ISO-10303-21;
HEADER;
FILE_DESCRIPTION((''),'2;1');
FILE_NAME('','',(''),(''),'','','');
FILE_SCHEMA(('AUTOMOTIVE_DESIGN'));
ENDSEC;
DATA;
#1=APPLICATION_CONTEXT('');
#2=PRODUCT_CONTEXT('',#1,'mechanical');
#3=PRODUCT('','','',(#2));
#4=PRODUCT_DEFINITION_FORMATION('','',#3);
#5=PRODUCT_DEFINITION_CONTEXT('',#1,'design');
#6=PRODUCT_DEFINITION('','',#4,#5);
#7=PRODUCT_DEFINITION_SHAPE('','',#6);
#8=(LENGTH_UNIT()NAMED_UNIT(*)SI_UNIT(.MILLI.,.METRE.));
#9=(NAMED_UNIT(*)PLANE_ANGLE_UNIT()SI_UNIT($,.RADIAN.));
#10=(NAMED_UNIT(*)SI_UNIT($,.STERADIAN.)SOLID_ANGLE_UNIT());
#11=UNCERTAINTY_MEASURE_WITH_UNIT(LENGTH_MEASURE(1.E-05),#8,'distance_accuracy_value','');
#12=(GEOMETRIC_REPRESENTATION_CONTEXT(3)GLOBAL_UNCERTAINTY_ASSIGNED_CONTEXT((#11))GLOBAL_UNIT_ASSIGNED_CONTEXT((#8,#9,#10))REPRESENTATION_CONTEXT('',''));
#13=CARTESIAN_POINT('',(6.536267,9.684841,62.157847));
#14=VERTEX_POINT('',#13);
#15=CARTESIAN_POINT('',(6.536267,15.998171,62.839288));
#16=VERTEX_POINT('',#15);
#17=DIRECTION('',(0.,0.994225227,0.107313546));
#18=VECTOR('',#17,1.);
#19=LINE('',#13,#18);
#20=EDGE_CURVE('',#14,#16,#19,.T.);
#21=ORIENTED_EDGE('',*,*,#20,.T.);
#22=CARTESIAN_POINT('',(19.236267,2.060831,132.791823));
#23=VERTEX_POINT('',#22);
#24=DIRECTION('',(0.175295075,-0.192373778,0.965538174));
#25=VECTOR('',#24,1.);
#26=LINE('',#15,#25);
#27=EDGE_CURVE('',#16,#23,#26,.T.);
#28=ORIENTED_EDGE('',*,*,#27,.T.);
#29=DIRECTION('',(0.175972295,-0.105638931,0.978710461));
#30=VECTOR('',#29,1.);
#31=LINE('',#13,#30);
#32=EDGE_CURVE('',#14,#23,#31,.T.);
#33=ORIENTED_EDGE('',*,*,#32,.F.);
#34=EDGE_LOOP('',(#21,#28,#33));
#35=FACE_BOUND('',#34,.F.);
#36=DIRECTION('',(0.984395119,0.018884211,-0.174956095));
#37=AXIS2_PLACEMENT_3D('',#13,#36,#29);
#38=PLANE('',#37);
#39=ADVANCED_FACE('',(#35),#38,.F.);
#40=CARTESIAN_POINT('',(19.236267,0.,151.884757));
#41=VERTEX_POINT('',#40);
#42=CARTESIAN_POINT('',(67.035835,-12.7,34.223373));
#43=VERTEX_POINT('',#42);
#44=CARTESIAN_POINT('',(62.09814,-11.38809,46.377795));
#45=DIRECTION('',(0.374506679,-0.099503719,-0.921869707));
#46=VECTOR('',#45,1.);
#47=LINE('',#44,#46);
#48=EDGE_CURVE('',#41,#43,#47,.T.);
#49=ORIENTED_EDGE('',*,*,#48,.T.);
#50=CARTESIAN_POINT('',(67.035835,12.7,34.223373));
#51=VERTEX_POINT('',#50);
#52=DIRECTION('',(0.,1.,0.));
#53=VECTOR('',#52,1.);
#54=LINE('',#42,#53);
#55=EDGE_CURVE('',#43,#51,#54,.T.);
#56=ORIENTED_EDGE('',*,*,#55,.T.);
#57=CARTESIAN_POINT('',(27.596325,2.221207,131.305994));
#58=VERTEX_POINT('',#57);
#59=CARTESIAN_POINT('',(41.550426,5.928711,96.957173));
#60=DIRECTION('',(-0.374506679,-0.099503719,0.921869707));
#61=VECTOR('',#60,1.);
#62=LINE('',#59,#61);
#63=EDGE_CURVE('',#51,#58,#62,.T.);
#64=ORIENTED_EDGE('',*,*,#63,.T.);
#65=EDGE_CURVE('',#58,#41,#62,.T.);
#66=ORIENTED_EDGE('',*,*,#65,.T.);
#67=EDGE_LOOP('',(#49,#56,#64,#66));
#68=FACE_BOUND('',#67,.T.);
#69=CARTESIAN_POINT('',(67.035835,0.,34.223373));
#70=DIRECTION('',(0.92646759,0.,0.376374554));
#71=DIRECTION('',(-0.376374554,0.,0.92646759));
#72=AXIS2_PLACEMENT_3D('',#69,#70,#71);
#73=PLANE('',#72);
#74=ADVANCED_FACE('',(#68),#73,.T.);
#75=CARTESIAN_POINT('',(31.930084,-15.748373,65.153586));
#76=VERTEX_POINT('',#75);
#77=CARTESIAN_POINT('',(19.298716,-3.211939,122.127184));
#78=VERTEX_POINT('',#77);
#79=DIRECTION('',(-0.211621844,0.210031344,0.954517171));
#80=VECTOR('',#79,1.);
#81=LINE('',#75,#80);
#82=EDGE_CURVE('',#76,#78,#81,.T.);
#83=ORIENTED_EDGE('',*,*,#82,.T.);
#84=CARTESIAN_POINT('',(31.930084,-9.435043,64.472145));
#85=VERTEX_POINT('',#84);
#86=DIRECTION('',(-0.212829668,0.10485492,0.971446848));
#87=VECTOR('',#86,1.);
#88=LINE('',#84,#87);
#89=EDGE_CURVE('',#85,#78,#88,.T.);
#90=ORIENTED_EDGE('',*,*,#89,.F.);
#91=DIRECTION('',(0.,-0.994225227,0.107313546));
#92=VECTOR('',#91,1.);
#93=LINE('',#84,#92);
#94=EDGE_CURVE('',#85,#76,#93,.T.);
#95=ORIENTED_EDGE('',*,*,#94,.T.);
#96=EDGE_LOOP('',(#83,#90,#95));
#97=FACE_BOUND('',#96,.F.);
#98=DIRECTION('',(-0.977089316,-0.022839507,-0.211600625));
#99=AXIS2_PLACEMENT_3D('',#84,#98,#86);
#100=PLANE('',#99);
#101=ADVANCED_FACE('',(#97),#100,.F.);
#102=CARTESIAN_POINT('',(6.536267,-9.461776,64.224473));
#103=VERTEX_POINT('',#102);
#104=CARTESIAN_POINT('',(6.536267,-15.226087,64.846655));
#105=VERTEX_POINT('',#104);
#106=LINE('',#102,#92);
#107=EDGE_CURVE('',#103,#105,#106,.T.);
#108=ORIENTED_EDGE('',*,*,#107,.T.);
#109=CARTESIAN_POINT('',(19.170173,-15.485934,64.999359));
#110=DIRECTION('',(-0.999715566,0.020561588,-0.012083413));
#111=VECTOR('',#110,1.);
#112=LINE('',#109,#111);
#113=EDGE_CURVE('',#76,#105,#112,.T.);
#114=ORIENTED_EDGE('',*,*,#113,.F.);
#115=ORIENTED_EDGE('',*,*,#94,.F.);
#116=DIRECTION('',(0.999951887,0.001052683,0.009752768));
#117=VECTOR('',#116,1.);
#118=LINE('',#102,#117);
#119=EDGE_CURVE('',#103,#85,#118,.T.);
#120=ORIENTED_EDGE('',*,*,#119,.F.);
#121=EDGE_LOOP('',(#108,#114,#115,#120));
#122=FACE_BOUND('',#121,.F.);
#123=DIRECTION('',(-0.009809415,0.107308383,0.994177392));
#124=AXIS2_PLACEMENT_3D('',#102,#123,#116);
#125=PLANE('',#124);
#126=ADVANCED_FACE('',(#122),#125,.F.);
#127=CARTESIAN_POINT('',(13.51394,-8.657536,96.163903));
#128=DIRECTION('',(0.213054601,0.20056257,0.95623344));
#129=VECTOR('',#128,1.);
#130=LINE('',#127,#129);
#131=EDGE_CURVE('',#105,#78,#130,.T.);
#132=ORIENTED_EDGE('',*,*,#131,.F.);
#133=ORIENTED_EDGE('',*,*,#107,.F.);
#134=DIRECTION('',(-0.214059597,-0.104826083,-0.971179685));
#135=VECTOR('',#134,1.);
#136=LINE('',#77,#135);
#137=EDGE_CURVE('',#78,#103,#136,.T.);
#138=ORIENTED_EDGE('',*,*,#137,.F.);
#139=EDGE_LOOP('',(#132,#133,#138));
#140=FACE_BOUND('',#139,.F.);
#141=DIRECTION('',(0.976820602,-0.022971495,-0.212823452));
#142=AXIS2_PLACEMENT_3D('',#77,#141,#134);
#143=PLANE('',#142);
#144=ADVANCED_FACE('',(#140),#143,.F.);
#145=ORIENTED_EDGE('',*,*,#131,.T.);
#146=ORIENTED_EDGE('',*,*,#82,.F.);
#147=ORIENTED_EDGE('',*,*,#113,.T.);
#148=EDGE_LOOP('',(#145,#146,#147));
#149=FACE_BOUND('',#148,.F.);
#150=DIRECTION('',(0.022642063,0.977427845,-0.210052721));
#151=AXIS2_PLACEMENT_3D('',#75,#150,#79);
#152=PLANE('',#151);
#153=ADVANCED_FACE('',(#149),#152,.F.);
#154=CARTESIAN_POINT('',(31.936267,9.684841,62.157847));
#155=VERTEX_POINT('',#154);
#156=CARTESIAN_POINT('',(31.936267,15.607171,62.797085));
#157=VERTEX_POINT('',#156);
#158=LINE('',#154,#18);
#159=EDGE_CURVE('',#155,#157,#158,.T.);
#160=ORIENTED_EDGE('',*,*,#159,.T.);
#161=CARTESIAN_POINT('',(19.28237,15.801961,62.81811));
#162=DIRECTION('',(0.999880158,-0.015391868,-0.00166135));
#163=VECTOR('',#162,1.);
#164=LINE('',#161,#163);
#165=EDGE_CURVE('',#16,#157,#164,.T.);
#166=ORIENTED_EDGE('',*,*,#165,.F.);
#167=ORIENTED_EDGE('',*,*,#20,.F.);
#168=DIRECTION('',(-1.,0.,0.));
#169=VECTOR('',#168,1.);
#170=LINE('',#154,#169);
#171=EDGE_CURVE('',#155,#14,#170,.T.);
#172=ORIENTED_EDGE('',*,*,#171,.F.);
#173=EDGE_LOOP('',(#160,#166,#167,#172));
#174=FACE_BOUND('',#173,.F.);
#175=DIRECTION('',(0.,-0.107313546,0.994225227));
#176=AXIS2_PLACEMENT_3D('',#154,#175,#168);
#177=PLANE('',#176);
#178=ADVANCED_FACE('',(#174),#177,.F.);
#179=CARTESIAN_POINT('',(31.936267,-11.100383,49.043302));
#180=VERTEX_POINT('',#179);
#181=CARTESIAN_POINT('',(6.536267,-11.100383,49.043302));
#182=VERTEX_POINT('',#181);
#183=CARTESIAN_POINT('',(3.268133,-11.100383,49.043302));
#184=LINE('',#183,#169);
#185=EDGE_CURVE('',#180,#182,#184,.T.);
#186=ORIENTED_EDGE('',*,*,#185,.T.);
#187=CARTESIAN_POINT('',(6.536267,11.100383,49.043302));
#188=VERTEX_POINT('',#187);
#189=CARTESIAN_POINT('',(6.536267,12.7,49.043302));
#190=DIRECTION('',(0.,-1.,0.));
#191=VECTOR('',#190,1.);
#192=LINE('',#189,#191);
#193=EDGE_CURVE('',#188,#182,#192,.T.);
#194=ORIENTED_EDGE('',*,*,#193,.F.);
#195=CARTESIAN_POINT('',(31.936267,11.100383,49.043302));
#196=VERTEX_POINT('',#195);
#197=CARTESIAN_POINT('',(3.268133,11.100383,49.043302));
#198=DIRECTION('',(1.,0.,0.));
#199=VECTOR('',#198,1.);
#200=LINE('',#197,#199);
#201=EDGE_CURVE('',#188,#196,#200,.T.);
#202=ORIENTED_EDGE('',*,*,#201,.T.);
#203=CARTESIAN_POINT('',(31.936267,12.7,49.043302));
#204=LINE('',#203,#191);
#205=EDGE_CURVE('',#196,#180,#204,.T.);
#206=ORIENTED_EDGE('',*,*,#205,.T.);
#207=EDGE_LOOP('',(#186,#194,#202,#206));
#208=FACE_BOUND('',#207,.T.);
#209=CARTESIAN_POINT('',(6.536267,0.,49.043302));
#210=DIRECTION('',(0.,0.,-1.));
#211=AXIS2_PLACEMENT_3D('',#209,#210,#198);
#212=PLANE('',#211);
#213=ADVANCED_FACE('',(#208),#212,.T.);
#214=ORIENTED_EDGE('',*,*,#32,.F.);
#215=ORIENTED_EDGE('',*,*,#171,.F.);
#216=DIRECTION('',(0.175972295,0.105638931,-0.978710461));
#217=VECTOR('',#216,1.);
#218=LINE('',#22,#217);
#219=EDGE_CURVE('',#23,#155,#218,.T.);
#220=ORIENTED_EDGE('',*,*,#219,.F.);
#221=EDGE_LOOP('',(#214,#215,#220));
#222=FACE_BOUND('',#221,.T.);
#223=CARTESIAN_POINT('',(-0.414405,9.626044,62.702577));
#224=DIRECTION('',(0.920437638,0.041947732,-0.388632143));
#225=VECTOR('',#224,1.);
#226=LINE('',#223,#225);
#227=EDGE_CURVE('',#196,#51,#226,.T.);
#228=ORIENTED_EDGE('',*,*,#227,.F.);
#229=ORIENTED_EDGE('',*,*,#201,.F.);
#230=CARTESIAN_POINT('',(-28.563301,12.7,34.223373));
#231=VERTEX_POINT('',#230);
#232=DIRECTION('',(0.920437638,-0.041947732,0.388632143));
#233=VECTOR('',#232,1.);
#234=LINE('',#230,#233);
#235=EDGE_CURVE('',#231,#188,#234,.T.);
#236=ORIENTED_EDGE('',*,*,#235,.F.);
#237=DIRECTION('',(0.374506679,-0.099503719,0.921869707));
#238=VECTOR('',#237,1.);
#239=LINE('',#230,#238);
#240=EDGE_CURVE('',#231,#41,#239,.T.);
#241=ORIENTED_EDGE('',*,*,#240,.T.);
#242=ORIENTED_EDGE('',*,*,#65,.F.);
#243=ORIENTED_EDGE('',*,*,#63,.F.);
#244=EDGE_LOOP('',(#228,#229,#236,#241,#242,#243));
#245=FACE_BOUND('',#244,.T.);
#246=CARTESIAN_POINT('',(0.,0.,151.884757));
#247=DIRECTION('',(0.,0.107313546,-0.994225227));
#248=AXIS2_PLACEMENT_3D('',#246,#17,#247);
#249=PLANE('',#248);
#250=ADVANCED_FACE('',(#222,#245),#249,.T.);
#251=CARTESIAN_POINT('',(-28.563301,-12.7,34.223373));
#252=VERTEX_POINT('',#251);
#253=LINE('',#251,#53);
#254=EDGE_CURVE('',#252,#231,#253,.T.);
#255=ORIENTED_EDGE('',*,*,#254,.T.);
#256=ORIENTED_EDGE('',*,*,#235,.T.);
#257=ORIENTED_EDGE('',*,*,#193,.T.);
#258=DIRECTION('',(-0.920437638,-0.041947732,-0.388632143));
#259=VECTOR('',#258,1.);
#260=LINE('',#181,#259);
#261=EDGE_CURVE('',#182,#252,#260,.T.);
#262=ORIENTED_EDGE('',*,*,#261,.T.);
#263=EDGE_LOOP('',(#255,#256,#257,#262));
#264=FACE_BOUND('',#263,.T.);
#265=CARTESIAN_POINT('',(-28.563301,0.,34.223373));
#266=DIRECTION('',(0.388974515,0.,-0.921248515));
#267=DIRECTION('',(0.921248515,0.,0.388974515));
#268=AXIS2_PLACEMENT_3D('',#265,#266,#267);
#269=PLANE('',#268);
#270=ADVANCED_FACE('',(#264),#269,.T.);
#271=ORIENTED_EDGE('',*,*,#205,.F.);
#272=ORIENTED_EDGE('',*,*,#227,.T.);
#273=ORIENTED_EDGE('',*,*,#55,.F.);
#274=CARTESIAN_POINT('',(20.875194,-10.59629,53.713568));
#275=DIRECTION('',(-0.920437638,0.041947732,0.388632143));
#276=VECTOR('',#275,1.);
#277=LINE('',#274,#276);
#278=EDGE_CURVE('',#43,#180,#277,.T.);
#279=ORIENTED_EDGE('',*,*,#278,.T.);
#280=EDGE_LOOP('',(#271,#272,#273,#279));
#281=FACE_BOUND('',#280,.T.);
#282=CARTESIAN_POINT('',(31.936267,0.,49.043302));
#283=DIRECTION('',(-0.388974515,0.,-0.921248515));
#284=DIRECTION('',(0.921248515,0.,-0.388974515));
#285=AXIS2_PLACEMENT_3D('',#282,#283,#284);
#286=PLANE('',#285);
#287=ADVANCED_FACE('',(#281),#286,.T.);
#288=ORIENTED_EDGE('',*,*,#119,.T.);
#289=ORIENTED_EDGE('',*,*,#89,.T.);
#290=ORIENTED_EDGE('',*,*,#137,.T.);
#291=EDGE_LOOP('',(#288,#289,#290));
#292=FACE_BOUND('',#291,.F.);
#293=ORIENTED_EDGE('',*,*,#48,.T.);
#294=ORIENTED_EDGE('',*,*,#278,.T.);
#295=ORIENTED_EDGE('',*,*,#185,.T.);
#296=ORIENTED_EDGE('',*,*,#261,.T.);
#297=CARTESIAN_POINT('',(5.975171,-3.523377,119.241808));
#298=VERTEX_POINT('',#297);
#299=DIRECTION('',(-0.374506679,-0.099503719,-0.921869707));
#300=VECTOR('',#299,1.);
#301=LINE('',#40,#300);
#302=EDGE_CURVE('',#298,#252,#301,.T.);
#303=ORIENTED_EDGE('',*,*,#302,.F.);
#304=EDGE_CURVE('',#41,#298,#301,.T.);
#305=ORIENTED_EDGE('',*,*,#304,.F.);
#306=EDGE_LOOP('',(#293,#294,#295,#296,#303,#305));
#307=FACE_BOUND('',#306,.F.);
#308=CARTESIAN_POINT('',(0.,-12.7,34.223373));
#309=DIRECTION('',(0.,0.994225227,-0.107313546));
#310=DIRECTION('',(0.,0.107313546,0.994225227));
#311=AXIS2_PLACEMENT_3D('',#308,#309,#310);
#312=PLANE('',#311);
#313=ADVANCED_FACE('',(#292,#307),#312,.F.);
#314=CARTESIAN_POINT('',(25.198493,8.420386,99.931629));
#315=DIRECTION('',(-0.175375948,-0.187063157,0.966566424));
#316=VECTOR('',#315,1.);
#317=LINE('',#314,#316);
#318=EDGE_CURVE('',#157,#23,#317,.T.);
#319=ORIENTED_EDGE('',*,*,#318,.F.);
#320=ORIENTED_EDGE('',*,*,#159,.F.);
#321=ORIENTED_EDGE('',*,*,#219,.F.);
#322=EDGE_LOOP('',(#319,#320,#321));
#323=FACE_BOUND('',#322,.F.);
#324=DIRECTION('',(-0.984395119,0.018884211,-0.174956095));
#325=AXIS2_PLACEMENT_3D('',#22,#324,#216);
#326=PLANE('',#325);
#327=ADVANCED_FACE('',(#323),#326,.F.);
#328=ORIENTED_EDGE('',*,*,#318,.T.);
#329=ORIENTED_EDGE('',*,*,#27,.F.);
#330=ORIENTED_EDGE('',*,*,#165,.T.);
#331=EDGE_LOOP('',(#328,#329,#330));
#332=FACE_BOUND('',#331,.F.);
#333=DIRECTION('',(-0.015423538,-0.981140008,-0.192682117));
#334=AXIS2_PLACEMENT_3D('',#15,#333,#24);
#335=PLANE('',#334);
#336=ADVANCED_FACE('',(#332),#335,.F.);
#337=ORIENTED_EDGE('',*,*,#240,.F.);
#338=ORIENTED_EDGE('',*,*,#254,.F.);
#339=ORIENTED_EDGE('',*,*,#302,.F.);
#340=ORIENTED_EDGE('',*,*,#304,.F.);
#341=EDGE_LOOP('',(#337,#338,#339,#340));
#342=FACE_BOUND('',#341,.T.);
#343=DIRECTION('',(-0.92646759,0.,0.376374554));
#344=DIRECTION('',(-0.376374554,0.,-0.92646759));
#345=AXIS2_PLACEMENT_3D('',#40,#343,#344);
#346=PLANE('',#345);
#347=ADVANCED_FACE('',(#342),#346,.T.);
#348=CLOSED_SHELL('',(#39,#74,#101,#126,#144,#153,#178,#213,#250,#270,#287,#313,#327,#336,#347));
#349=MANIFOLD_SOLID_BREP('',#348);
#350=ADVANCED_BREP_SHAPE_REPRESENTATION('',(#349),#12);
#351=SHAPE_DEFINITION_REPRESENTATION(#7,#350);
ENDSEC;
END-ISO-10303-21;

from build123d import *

# Parameters (mm, degrees)
F3_DEPTH  = 12.7
F5_DEPTH  = 67.0368353671
F6_DEPTH  = 28.5643014728
F8_DEPTH  = 6.35
F10_DEPTH = 64.56300866
F12_DEPTH = 6.35
F14_DEPTH = 65.6539037047


# Not quite as in the source:
# - the program builds the solid bodies; features that only make, move or delete a surface that nothing else refers to are left out


with BuildPart() as f3:
    # F2 (on Front) → F3 (new body, symmetric)
    with BuildSketch(Plane.XZ):
        Polygon((-28.5633014728, 34.2233732831), (6.5362669471, 49.0433023226), (31.9362669471, 49.0433023226), (67.0358353671, 34.2233732831), (19.2362669471, 151.884757173), align=None)
    extrude(amount=F3_DEPTH, both=True)

    # F4 (on Right) → F5 (cut, through all)
    with BuildSketch(Plane.YZ):
        Polygon((-12.7, 151.884757173), (-12.7, 49.0433023226), (-11.1003834344, 49.0433023226), (0, 151.884757173), align=None)
        Polygon((11.1003834344, 49.0433023226), (12.7, 49.0433023226), (12.7, 151.884757173), (0, 151.884757173), align=None)
        Polygon((-12.7, 49.0433023226), (-12.7, 34.2233732831), (-11.1003834344, 49.0433023226), align=None)
        Polygon((11.1003834344, 49.0433023226), (12.7, 34.2233732831), (12.7, 49.0433023226), align=None)
    extrude(amount=F5_DEPTH, mode=Mode.SUBTRACT)

    # F4 (on Right) → F6 (cut, through all)
    with BuildSketch(Plane.YZ):
        Polygon((-12.7, 151.884757173), (-12.7, 49.0433023226), (-11.1003834344, 49.0433023226), (0, 151.884757173), align=None)
        Polygon((11.1003834344, 49.0433023226), (12.7, 49.0433023226), (12.7, 151.884757173), (0, 151.884757173), align=None)
        Polygon((11.1003834344, 49.0433023226), (12.7, 34.2233732831), (12.7, 49.0433023226), align=None)
        Polygon((-12.7, 49.0433023226), (-12.7, 34.2233732831), (-11.1003834344, 49.0433023226), align=None)
    extrude(amount=-F6_DEPTH, mode=Mode.SUBTRACT)

    # F7 (on face) → F8 (join)
    with BuildSketch(Plane(origin=(0, 16.2051672418, 1.7491348237), x_dir=(-1, 0, 0), z_dir=(0, 0.9942252274, 0.1073135465))):
        Polygon((-6.5362669471, 60.7595853508), (-19.2362669471, 131.8038254976), (-31.9362669471, 60.7595853508), align=None)
    extrude(amount=F8_DEPTH)

    # F9 (on face) → F10 (cut, through all)
    with BuildSketch(Plane(origin=(-4.1912929855, -0.0804039557, 0.7449165901), x_dir=(0.0185928408, -0.9998216774, -0.0033044971), z_dir=(-0.9843951195, -0.0188842111, 0.1749560955))):
        Polygon((-15.6091843346, 67.4581627004), (-16.0814424902, 63.0134852894), (-2.1416171439, 134.1090394919), (-8.4560733481, 134.7799663477), align=None)
    extrude(amount=-F10_DEPTH, mode=Mode.SUBTRACT)

    # F11 (on face) → F12 (join)
    with BuildSketch(Plane(origin=(0, -16.2051672418, 1.7491348237), x_dir=(1, 0, 0), z_dir=(0, -0.9942252274, 0.1073135465))):
        Polygon((19.2987158189, 121.0772431274), (6.5362669471, 62.8382145463), (31.9300841439, 63.0873250248), align=None)
    extrude(amount=F12_DEPTH)

    # F13 (on face) → F14 (cut, through all)
    with BuildSketch(Plane(origin=(43.6030001695, 1.019222081, 9.442762247), x_dir=(-0.0223220606, 0.9997391444, -0.0048341149), z_dir=(0.9770893164, 0.0228395065, 0.2116006255))):
        Polygon((-16.230656346, 62.0519835601), (-16.7719699924, 56.9192946566), (-4.2322649759, 115.2756170682), (-10.5472424667, 115.9416195391), align=None)
    extrude(amount=-F14_DEPTH, mode=Mode.SUBTRACT)


solid = f3.part
